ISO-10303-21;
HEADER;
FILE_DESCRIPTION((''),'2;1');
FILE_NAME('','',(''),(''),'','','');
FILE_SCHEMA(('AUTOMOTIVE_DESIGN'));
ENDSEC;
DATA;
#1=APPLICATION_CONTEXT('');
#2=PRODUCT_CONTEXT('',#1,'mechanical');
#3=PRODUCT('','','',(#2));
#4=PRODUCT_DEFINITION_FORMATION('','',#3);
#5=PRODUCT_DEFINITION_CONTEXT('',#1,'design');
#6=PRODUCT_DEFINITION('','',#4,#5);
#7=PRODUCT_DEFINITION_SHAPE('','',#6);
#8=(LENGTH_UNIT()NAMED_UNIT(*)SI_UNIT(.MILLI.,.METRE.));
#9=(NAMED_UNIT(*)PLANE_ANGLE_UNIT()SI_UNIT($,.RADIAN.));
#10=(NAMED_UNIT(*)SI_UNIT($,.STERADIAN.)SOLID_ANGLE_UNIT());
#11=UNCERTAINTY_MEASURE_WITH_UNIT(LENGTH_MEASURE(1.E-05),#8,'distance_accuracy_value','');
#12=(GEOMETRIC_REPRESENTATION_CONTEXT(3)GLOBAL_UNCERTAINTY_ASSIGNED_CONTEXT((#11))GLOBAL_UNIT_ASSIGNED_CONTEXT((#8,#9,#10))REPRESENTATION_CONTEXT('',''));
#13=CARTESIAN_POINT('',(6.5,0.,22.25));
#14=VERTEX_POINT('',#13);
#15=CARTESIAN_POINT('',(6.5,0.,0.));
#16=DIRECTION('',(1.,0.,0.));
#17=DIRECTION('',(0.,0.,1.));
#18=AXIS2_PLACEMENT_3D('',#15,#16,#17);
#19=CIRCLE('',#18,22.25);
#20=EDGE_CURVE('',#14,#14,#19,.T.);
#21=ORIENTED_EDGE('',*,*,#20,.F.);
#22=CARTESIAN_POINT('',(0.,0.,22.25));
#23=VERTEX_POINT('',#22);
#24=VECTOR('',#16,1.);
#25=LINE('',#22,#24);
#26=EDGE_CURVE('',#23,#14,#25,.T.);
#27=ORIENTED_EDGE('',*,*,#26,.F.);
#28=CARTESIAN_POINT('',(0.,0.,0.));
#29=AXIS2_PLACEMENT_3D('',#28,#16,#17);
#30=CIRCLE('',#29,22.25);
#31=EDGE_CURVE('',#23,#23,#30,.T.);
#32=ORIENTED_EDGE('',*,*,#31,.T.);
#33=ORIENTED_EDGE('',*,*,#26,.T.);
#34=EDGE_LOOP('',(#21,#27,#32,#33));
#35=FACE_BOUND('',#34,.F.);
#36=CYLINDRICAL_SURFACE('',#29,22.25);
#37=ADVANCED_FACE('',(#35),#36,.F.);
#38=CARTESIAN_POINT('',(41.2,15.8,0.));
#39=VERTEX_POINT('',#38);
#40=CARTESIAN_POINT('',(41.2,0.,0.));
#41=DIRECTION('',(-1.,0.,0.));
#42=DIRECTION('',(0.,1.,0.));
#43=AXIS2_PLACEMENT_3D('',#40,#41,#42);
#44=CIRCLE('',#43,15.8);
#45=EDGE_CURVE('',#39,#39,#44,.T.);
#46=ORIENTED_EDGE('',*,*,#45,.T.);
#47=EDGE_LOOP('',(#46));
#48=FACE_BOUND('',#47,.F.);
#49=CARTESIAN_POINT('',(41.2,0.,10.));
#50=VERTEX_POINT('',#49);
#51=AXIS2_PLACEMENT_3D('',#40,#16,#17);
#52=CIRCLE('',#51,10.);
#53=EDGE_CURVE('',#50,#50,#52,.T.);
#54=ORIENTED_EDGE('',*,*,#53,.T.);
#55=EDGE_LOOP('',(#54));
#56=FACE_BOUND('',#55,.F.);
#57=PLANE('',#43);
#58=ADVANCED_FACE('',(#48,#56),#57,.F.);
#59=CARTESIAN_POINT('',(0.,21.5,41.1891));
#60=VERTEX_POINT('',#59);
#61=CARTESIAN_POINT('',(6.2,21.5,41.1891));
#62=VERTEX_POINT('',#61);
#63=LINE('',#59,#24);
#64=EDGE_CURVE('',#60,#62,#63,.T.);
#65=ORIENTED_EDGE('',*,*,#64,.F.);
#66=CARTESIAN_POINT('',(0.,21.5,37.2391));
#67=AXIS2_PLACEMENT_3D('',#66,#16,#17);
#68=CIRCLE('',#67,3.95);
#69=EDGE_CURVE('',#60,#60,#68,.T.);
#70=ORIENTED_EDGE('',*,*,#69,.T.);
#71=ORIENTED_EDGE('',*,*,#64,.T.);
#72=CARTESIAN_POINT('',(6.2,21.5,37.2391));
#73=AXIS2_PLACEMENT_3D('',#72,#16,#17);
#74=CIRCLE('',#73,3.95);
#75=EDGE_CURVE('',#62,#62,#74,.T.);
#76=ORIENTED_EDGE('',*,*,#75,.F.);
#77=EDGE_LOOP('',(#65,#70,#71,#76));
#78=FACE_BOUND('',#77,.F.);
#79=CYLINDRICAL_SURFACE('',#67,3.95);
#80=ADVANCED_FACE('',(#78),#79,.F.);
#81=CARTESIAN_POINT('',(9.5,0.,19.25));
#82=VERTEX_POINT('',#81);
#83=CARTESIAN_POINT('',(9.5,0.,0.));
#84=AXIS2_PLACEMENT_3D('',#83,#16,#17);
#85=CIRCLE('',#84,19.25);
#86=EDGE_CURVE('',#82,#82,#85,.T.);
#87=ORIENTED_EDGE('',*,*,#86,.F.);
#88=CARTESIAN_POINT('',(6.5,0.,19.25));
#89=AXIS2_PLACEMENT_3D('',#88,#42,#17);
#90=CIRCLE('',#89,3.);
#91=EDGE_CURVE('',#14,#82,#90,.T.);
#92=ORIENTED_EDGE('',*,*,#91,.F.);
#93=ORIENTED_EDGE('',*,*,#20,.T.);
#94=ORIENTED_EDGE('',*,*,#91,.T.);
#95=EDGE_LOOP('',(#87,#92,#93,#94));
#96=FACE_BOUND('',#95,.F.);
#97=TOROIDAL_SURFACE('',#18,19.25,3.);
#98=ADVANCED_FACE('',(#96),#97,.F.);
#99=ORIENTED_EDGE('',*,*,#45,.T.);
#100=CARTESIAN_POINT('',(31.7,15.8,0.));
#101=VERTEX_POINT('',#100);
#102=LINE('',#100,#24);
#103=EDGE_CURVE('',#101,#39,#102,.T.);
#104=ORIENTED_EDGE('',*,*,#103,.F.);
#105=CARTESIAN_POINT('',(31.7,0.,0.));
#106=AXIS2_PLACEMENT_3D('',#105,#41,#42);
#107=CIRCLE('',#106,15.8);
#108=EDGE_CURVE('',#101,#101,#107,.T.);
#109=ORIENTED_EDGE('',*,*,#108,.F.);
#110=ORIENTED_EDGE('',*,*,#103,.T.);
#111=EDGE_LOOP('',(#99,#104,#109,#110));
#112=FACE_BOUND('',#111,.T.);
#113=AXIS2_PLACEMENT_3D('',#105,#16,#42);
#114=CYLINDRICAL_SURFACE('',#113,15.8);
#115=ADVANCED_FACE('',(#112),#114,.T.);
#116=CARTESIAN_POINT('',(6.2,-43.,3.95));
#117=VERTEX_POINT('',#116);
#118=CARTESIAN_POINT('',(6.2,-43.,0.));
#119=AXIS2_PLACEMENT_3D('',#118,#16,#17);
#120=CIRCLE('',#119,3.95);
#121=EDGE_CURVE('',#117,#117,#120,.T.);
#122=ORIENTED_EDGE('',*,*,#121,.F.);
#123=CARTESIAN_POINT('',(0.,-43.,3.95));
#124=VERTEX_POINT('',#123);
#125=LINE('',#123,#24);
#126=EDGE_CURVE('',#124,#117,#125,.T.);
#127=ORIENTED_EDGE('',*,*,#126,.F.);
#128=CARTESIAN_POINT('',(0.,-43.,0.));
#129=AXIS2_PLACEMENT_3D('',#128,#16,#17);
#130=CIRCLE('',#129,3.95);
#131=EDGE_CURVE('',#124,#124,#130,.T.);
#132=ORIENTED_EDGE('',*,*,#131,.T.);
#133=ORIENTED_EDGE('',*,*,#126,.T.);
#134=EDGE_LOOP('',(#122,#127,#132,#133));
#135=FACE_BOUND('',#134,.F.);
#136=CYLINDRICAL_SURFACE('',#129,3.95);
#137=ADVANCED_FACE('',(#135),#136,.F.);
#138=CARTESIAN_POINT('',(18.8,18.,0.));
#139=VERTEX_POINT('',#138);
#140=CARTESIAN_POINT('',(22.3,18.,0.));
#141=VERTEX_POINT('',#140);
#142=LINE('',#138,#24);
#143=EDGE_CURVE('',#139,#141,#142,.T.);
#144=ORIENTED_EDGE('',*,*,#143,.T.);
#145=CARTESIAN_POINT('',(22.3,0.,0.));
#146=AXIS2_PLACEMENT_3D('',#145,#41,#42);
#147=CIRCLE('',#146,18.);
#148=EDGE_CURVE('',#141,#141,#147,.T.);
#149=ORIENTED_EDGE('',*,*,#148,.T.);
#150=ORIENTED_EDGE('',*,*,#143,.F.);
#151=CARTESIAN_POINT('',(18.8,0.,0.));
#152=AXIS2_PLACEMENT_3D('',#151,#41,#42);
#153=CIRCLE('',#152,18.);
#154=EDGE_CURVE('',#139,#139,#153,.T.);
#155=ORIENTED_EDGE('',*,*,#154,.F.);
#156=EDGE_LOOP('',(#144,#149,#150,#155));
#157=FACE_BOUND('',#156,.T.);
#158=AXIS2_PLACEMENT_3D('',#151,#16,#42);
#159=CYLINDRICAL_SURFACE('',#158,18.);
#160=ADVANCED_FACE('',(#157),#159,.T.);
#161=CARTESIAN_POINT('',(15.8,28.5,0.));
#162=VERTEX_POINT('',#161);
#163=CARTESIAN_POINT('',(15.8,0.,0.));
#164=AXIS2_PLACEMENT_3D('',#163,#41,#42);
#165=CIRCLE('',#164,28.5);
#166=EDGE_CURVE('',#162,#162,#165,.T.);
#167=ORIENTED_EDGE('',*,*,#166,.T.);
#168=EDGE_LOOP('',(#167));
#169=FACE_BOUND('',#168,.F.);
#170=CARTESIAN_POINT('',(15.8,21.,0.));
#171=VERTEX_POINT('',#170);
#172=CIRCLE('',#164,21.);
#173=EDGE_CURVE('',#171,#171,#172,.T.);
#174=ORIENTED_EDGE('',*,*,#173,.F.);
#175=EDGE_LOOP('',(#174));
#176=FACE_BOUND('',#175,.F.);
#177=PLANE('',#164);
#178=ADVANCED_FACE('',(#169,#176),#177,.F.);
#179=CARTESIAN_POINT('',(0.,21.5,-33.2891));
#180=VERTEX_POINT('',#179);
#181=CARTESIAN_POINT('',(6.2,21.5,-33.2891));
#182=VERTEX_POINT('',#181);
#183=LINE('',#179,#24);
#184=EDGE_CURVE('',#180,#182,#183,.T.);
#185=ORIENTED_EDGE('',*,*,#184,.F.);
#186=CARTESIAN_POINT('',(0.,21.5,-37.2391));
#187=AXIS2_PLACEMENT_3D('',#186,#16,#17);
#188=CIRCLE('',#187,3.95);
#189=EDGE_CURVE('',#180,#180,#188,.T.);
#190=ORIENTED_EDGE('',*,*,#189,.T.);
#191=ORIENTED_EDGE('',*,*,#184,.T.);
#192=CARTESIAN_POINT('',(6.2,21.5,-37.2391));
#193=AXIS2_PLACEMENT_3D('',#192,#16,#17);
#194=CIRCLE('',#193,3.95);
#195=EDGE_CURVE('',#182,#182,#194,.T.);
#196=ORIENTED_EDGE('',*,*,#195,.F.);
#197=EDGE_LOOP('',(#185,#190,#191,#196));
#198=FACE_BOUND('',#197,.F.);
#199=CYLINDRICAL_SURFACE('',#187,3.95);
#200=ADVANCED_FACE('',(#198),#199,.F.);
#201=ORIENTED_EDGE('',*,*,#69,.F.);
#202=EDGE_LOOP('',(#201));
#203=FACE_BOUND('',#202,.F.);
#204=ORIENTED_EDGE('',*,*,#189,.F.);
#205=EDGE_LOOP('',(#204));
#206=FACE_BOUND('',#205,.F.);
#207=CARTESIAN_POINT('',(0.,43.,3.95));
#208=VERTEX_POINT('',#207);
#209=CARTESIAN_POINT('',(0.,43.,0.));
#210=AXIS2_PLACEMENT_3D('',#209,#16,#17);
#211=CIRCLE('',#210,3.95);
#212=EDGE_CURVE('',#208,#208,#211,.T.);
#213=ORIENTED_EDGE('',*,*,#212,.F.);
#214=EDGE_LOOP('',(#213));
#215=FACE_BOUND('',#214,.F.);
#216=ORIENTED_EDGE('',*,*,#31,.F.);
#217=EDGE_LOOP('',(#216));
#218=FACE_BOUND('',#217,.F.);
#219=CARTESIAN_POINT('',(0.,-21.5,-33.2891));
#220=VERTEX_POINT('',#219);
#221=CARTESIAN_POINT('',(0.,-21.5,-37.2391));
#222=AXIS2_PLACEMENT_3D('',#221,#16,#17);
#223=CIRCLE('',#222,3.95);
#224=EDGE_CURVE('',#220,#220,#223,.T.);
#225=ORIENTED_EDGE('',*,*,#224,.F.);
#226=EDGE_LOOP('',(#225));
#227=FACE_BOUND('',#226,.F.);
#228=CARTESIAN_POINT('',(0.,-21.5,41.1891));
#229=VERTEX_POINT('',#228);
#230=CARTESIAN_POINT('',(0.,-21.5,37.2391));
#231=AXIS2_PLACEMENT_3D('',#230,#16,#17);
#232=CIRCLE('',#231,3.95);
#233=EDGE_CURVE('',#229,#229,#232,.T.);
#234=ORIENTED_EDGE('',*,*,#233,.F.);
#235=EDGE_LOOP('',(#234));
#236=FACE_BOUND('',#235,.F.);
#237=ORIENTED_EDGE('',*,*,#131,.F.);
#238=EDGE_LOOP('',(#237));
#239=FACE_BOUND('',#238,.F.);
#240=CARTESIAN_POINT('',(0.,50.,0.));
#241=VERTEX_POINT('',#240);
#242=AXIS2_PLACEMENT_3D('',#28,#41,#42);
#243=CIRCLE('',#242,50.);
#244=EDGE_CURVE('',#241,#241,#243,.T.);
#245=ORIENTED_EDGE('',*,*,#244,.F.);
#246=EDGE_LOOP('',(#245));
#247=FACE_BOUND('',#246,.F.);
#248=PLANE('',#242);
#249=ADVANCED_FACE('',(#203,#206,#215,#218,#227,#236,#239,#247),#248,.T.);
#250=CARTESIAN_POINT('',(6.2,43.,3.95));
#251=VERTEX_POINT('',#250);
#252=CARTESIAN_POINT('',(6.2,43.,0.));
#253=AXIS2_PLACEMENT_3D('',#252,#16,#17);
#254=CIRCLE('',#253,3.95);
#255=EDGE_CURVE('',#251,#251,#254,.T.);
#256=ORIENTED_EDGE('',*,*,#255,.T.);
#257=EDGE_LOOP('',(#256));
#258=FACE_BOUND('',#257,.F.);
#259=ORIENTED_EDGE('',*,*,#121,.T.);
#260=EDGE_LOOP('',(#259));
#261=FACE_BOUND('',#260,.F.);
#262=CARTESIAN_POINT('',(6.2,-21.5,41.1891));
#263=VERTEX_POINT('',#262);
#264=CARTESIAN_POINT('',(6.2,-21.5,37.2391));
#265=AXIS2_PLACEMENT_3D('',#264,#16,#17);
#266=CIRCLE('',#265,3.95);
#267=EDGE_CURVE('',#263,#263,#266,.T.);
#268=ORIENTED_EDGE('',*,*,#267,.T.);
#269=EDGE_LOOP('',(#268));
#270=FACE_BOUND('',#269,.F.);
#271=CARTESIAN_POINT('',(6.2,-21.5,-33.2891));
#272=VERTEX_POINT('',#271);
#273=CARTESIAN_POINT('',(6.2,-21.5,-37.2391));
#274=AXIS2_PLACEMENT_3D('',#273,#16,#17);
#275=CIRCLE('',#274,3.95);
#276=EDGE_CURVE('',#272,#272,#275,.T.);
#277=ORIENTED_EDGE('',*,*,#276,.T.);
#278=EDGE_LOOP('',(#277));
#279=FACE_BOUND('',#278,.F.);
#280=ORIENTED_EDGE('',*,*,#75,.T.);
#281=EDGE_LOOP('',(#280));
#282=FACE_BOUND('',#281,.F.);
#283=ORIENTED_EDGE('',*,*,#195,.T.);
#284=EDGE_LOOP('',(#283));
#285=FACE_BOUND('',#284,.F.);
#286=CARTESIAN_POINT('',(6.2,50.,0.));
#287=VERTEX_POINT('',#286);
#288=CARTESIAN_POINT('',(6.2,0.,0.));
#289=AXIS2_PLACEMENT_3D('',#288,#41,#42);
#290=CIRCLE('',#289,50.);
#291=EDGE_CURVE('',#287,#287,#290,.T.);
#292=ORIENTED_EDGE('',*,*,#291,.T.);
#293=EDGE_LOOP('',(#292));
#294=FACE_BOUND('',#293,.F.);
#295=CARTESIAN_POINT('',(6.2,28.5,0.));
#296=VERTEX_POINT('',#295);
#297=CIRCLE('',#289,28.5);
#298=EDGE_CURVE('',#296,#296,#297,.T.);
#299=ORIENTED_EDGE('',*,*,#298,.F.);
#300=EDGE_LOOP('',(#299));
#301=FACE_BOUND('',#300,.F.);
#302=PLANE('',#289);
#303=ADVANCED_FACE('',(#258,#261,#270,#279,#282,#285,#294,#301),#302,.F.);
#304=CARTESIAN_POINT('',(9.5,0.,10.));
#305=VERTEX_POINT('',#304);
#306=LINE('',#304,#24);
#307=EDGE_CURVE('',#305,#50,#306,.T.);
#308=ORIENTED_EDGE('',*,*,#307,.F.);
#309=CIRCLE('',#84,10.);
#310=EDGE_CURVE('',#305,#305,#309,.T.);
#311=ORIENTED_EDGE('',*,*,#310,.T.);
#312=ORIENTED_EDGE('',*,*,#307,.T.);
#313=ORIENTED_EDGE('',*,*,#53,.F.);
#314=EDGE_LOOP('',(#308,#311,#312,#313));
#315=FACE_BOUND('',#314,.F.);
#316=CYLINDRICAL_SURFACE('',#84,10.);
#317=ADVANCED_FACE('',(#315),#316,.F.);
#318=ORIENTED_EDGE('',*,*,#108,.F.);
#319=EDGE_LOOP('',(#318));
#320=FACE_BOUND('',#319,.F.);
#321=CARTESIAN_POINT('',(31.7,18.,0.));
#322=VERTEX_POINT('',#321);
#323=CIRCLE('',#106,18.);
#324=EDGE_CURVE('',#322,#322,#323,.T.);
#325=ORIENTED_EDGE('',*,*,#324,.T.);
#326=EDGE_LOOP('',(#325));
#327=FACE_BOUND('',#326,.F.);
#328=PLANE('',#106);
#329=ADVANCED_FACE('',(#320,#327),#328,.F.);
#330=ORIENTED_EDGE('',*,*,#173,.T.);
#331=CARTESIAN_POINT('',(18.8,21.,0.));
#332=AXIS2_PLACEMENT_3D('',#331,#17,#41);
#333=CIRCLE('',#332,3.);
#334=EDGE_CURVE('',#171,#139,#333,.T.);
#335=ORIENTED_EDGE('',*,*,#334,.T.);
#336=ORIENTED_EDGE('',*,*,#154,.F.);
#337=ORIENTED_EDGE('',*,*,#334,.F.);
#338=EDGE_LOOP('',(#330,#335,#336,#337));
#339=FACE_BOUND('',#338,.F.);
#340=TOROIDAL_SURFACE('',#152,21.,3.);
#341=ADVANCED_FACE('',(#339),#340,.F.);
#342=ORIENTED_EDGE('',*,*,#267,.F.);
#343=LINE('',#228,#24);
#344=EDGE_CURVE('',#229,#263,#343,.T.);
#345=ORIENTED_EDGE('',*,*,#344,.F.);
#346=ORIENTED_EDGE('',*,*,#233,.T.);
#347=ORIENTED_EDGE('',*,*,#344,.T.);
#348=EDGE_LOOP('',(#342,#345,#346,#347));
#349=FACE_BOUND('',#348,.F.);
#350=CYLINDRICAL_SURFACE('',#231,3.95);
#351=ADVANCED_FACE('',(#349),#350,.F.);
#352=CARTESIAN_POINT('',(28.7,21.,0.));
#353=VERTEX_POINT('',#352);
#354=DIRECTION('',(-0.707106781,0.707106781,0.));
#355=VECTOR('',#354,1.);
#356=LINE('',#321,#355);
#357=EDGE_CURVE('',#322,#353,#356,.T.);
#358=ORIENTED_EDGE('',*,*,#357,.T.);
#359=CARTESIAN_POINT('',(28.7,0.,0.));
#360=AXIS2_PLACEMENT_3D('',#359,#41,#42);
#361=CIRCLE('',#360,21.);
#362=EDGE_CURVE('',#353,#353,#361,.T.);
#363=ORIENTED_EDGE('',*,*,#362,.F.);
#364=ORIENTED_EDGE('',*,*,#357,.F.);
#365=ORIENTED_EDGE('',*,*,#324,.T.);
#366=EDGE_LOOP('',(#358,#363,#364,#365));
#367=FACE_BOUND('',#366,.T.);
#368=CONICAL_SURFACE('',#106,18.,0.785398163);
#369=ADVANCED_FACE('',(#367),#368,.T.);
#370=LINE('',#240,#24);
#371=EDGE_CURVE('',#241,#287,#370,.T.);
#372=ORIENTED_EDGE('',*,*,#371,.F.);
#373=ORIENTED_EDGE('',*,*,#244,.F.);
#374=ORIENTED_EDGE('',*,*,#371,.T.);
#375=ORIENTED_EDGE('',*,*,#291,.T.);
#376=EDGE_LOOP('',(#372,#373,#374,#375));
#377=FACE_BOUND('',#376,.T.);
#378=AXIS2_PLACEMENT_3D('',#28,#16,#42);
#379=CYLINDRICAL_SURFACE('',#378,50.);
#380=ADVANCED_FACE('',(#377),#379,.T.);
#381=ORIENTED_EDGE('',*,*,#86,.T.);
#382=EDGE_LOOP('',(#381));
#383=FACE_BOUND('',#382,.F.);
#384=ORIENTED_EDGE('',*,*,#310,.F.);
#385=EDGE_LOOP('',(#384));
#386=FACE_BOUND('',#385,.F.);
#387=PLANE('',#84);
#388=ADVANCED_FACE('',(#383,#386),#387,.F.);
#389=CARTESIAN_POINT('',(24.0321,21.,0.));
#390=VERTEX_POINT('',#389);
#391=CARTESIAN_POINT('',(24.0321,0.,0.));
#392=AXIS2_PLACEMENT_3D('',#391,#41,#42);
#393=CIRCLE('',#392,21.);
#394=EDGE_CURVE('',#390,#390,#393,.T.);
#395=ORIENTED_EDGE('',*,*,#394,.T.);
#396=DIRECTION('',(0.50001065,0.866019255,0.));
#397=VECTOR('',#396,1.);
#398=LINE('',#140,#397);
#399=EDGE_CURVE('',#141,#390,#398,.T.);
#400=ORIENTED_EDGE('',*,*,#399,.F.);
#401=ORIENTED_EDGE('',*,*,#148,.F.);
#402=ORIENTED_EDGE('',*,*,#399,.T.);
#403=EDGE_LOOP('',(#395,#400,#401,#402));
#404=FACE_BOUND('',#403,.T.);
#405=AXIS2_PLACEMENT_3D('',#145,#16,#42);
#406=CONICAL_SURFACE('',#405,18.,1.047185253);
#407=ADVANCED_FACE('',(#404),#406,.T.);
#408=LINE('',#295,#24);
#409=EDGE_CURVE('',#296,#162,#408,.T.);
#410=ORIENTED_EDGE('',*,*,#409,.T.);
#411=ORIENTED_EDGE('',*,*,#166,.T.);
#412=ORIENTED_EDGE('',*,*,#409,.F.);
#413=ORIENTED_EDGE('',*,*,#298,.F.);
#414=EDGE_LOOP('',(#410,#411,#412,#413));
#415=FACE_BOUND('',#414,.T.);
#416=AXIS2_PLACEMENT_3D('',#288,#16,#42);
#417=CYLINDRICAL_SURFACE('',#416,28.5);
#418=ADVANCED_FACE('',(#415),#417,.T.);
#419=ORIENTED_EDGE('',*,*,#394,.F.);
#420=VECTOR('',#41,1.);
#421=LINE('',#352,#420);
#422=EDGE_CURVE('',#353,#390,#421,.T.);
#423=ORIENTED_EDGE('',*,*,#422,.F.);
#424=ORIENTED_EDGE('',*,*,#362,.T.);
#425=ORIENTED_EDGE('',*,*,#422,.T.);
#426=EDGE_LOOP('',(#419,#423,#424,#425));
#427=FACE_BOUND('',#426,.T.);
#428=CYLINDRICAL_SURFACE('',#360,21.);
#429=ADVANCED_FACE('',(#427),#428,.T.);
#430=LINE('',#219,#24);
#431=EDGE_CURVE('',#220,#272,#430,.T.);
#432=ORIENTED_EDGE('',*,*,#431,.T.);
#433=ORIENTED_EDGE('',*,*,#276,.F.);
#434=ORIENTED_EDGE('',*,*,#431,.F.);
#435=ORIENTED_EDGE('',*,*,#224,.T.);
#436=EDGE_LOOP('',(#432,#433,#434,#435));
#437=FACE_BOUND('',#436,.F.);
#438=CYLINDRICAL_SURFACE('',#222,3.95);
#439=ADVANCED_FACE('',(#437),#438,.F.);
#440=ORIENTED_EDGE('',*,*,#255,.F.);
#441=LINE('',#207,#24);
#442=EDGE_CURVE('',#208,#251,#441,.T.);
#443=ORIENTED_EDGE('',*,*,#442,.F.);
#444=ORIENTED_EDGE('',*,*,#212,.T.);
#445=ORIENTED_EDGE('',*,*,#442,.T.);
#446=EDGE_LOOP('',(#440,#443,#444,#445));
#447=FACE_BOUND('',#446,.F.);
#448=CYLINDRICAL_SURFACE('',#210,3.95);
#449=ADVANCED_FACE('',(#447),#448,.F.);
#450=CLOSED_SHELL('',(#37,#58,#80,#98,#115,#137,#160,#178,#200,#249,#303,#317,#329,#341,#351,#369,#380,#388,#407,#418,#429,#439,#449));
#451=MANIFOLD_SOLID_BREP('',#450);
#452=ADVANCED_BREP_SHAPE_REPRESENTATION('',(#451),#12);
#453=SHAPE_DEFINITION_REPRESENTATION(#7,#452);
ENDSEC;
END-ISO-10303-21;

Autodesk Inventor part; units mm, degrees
ref_plane "YZ Plane" through (0, 0, 0) normal (1, 0, 0) x (0, 1, 0)
ref_plane "XZ Plane" through (0, 0, 0) normal (0, 1, 0) x (-1, 0, 0)
ref_plane "XY Plane" through (0, 0, 0) normal (0, 0, 1) x (1, 0, 0)
sketch "Boceto1" plane through (0, 0, 0) normal (0, 0, 1) x (1, 0, 0)
  line L0 (0, 0) -> (0, 50)
  line L1 (0, 50) -> (6.2, 50)
  line L2 (6.2, 50) -> (6.2, 28.5)
  line L3 (6.2, 28.5) -> (15.8, 28.5)
  line L4 (15.8, 28.5) -> (15.8, 21)
  line L5 (18.8, 18) -> (22.3, 18)
  line L6 (22.3, 18) -> (22.3, 21.9094) construction
  line L7 (41.2, 0) -> (0, 0)
  arc A0 (15.8, 21) -> (18.8, 18) centre (18.8, 21) ccw
  line L8 (22.3, 18) -> (28.4018, 18) construction
  line L9 (28.7, 21) -> (24.0321, 21)
  line L10 (22.3, 18) -> (24.0321, 21)
  line L11 (22.3, 18) -> (25.7641, 18) construction
  line L12 (59.327, 18) -> (29.2282, 18) construction
  line L13 (31.7, 18) -> (31.7, 21) construction
  line L14 (31.7, 18) -> (28.7, 21)
  line L15 (31.7, 18) -> (35.9426, 18) construction
  line L16 (31.7, 18) -> (41.2, 18) construction
  line L17 (41.2, 15.8) -> (41.2, 0)
  line L18 (31.7, 18) -> (31.7, 0)
  line L19 (31.7, 15.8) -> (41.2, 15.8)
  line L20 (22.3, 18) -> (22.3, 0)
  point P0 (15.8, 18)
  dimension "d0" = 50
  dimension "d1" = 6.2
  dimension "d2" = 9.6
  dimension "d3" = 28.5
  dimension "d4" = 6.5
  dimension "d5" = 3
  dimension "d8" = 18
  dimension "d10" = 21
  dimension "d11" = 60
  dimension "d12" = 18
  dimension "d14" = 9.4
  dimension "d15" = 135
  dimension "d16" = 9.5
  dimension "d17" = 41.2
  dimension "d18" = 15.8
revolve "Revolución1" add sketch "Boceto1" angle 360 about axis through (41.2, 0, 0) along (-1, 0, 0)
sketch "Boceto2" plane through (0, 0, 0) normal (-1, 0, 0) x (0, 0, 1)
  circle A0 centre (0, 0) radius 28.5 projected
  point P0 (0, 0)
hole "Agujero1" at (0, 0, 0) direction (1, 0, 0) diameter 20 end through all counterbore diameter 44.5 counterbore depth 9.5
sketch "Boceto3" plane through (0, 0, 0) normal (-1, 0, 0) x (0, 0, 1)
  point P0 (0, 0)
  point P1 (0, 43)
  point P2 (-37.2391, 21.5)
  point P3 (-37.2391, -21.5)
  point P4 (0, -43)
  point P5 (37.2391, -21.5)
  point P6 (37.2391, 21.5)
  dimension "d27" = 43
  dimension "d37" = 360
hole "Agujero2" at (0, 43, 0) at (0, 21.5, 37.2391) at (0, -21.5, 37.2391) at (0, -43, 0) at (0, -21.5, -37.2391) at (0, 21.5, -37.2391) direction (1, 0, 0) diameter 7.9 end through all
thread "Rosca1" size "M42x1.5" class "6g" standard "ANSI Metric M Profile" full length
fillet "Empalme1" radius 3 1 edges at (9.5, 0, -22.25)
properties part number "Lab15_A01209499" material "Acero, carbono"
